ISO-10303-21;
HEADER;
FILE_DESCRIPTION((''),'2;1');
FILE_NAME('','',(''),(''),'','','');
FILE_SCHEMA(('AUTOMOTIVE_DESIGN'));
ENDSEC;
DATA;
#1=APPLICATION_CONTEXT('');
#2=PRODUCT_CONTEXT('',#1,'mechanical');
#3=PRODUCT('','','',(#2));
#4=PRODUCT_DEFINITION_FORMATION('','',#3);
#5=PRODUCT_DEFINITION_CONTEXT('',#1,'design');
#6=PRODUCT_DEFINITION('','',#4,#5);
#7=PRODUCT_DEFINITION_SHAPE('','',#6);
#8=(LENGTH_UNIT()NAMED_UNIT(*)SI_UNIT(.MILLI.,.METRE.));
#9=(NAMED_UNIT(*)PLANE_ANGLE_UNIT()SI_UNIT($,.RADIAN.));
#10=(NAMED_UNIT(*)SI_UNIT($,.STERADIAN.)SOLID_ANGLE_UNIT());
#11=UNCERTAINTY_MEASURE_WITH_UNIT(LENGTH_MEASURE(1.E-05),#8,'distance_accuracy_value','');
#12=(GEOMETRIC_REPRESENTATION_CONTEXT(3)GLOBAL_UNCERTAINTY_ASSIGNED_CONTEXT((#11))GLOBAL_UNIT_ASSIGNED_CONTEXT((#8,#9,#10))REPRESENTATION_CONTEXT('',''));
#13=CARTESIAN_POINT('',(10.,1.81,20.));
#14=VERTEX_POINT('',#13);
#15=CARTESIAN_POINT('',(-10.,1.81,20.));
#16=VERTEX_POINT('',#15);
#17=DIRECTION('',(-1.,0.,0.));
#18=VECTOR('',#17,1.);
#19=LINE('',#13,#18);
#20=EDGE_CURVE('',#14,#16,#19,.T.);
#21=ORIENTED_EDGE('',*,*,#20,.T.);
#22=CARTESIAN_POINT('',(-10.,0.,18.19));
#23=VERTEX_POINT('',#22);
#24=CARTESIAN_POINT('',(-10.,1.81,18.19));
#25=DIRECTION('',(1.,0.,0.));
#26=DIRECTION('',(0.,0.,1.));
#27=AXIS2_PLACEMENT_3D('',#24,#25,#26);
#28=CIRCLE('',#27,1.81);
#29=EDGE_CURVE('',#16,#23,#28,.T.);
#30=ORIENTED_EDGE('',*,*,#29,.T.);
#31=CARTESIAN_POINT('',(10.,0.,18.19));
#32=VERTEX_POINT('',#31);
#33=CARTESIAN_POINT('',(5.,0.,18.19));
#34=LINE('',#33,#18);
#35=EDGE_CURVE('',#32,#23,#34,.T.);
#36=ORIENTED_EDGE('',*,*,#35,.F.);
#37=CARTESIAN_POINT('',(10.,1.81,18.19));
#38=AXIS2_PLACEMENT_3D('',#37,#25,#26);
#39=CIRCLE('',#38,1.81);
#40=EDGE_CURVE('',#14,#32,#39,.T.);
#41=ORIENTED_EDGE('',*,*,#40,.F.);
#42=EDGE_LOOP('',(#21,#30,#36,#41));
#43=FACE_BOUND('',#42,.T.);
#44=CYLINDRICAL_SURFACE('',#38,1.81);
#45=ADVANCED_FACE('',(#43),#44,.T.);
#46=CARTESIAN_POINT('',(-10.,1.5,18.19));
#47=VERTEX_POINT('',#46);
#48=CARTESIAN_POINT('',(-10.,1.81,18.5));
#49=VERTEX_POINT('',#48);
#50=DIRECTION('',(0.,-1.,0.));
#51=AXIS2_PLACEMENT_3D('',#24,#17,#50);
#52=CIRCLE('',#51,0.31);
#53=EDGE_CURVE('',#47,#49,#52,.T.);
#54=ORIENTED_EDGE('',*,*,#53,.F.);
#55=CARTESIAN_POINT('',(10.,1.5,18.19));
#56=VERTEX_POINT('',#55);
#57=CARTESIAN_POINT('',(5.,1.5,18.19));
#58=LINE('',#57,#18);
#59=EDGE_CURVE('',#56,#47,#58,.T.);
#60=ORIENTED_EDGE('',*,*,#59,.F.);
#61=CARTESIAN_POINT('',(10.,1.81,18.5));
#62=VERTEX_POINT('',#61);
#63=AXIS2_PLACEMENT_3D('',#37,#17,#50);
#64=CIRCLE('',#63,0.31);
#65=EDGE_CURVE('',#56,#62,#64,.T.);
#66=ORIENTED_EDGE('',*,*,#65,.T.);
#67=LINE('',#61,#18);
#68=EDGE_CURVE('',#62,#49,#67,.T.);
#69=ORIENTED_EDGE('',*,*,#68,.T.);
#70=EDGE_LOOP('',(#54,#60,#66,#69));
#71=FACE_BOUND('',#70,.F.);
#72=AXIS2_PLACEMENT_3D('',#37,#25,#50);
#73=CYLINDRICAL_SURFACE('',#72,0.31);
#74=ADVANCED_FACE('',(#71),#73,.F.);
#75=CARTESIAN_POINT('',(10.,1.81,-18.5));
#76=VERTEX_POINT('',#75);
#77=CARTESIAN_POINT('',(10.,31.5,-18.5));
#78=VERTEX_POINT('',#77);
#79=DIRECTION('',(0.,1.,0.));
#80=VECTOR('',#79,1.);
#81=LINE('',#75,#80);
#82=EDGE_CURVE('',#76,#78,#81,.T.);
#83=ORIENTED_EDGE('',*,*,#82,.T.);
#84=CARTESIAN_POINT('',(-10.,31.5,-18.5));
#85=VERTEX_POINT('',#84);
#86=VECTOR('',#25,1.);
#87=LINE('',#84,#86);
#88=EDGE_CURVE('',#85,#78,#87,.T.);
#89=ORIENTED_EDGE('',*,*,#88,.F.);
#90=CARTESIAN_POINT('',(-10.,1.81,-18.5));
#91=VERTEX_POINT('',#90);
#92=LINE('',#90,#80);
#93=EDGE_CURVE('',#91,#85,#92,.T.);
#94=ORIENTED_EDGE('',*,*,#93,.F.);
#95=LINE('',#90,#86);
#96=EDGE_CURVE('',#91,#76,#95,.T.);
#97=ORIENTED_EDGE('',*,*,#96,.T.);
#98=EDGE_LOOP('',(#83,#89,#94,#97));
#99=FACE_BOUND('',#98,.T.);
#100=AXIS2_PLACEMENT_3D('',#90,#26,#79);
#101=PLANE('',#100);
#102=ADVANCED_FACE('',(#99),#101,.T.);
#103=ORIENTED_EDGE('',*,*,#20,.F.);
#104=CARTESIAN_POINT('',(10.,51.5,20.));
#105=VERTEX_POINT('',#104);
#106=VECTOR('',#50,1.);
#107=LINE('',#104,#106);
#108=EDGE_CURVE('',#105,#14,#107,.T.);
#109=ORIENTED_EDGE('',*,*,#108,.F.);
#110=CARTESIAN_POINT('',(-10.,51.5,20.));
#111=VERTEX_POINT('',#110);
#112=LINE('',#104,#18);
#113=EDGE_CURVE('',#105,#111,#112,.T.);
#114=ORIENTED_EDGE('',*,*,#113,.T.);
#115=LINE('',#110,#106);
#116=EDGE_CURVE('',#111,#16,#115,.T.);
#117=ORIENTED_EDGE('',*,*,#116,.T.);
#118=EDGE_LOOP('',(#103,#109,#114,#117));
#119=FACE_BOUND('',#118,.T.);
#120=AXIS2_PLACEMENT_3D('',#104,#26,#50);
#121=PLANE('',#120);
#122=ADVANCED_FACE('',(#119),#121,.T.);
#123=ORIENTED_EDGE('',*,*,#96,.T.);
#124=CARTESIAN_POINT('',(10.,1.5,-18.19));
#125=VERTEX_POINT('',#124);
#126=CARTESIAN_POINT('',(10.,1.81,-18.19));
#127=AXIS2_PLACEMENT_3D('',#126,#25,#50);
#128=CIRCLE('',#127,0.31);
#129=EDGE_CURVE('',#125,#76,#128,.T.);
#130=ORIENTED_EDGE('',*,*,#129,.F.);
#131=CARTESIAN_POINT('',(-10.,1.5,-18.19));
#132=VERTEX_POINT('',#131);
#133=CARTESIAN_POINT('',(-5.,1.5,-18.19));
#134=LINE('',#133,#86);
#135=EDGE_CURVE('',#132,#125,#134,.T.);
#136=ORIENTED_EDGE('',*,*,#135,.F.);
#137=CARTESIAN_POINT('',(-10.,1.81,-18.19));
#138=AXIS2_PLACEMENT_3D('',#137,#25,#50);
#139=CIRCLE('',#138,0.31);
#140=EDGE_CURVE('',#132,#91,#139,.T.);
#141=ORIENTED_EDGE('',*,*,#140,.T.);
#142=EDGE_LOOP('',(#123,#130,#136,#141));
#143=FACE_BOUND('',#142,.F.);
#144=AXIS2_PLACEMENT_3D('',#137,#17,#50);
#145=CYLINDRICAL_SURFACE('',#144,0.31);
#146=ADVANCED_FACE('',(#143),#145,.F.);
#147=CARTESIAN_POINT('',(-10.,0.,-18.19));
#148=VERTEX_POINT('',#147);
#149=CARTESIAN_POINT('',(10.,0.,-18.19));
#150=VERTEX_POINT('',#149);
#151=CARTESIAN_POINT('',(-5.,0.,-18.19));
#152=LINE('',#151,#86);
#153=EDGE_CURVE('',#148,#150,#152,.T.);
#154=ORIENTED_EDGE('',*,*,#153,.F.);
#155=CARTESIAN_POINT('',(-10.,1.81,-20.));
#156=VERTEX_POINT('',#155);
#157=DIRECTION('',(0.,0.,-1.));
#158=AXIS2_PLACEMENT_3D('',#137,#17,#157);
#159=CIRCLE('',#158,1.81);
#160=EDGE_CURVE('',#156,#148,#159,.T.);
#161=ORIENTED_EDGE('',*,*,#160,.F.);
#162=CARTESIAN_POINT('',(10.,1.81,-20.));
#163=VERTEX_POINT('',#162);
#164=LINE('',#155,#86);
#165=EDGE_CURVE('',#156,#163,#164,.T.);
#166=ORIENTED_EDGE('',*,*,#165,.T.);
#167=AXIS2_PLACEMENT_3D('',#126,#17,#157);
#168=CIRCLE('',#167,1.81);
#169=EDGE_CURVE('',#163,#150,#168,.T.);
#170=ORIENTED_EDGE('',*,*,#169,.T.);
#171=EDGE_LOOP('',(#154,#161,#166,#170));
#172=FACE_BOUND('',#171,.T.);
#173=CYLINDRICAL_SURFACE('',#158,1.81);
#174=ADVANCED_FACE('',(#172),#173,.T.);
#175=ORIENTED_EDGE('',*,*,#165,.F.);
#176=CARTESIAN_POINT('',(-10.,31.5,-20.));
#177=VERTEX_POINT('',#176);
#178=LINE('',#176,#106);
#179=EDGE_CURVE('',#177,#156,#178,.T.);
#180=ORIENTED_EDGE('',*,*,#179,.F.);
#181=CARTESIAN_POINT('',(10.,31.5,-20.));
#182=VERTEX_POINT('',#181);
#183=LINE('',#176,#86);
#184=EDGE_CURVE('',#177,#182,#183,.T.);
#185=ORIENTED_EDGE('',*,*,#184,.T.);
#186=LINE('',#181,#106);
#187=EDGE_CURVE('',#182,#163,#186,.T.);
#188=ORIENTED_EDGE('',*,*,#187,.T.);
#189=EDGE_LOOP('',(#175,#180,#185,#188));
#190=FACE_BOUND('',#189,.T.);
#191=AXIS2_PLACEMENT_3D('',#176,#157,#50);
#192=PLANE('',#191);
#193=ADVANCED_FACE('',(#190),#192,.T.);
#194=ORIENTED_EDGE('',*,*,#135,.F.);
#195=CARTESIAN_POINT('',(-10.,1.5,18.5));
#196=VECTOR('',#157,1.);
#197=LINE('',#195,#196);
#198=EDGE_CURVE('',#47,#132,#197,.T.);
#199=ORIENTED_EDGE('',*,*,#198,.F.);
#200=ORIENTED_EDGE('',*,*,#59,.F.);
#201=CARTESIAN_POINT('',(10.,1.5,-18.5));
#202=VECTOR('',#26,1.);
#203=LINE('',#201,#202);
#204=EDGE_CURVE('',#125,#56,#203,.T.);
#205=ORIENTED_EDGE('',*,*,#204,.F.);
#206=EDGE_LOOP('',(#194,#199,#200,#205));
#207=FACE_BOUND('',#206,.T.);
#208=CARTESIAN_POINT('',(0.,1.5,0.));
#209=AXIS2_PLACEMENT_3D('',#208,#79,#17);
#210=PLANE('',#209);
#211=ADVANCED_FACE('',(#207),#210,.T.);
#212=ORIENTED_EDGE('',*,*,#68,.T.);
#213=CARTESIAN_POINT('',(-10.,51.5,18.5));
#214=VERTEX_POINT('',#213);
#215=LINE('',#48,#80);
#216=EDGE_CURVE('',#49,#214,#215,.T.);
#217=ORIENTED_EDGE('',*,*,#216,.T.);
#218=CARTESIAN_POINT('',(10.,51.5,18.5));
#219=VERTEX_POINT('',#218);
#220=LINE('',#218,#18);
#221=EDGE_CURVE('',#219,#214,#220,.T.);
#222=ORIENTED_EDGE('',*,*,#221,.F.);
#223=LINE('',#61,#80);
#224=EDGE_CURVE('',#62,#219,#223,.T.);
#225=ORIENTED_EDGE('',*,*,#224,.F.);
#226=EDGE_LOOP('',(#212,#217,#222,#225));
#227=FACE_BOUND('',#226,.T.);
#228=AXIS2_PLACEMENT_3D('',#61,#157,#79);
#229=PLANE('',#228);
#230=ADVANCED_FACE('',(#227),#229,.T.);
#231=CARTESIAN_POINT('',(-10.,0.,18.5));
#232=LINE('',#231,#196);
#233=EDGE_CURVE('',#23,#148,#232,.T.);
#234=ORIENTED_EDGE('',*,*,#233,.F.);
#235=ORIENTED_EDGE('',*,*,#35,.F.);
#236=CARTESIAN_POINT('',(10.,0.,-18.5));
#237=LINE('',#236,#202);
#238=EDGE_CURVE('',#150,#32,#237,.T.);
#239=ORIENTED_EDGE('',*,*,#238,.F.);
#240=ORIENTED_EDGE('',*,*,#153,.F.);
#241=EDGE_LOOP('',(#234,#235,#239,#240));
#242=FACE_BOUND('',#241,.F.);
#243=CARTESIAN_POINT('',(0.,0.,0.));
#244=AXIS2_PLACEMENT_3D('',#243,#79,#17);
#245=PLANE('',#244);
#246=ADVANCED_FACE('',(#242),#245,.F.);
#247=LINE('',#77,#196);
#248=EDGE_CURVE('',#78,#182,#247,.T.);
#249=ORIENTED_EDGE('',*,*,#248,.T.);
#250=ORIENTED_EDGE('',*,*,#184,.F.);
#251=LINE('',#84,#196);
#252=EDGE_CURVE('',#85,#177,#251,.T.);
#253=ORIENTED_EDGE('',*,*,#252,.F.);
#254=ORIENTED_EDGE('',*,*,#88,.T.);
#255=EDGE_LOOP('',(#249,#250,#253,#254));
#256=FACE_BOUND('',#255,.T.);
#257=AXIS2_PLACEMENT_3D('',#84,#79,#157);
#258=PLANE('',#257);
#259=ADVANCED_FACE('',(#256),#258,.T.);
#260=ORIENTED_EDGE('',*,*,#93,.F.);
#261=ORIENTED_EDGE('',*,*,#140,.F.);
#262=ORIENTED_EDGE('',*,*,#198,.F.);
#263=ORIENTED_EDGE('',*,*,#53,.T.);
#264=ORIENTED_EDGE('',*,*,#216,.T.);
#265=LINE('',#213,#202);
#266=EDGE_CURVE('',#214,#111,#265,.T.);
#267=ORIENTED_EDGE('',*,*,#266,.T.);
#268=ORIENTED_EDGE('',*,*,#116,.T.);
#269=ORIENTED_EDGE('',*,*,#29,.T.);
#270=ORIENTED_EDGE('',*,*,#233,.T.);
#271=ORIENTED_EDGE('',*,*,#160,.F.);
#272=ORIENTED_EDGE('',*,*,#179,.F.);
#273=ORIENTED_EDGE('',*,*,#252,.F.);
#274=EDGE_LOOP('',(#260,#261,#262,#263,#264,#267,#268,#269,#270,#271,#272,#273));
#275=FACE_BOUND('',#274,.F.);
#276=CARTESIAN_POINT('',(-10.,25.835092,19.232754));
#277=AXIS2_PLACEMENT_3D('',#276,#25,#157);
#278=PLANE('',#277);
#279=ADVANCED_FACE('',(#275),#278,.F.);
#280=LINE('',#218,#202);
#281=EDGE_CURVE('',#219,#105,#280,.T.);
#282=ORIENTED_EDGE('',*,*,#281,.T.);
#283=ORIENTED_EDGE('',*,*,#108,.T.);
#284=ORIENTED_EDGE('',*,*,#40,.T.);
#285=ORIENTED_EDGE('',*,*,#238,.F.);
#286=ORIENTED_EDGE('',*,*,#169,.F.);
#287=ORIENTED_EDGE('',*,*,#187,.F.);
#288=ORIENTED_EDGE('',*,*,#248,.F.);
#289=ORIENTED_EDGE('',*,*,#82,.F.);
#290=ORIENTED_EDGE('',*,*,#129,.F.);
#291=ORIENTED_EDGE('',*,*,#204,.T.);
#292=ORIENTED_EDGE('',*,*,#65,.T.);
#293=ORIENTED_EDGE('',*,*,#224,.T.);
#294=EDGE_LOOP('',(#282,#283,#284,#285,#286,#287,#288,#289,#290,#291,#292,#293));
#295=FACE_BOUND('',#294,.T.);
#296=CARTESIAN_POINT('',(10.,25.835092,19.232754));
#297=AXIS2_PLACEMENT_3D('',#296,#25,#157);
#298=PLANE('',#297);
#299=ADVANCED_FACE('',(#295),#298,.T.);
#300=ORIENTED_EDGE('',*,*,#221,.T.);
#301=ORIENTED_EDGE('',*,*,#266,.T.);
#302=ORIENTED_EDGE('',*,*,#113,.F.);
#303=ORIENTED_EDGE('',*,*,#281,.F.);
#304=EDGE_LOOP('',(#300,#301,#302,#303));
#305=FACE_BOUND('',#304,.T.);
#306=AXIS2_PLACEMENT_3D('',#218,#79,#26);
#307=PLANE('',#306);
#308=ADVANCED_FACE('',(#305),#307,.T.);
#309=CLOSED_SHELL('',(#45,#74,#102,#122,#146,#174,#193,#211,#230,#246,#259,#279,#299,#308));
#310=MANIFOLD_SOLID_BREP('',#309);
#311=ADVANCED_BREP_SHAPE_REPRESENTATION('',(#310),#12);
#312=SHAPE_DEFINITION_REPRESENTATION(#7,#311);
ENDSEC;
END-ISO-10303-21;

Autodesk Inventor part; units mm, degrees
ref_plane "YZ Plane" through (0, 0, 0) normal (1, 0, 0) x (0, 1, 0)
ref_plane "XZ Plane" through (0, 0, 0) normal (0, 1, 0) x (-1, 0, 0)
ref_plane "XY Plane" through (0, 0, 0) normal (0, 0, 1) x (1, 0, 0)
sketch "Sketch1" plane through (0, 0, 0) normal (0, 1, 0) x (-1, 0, 0)
  line L0 (10, -18.5) -> (-10, -18.5)
  line L1 (-10, -18.5) -> (-10, 18.5)
  line L2 (-10, 18.5) -> (10, 18.5)
  line L3 (10, 18.5) -> (10, -18.5)
  point P0 (0, 0)
  dimension "d0" = 20
  dimension "d1" = 37
  dimension "d2" = 18.5
  dimension "d3" = 10
extrude "Plate1" add sketch "Sketch1" along normal blind 1.5
sketch "Sketch2" plane through (-10, 0, -20) normal (0, 0, 1) x (1, 0, 0)
  line L0 (20, 0) -> (0, 0)
  line L1 (0, 0) -> (0, 31.5)
  line L2 (0, 31.5) -> (20, 31.5)
  line L3 (20, 31.5) -> (20, 0)
edge flange "Flange1" height 31.5 angle 90 thickness 1.5 bend radius 0.31 thickness toward (0, 0, 1) relief tear relief width 1.5 relief depth 0.75 edges at (0, 1.5, -18.5) wall of the first edge with corners at (10, 0, -20) (-10, 0, -20) (-10, 31.5, -20) (10, 31.5, -20)
bend "Bend1"
corner "Corner1"
sketch "Sketch3" plane through (10, 0, 20) normal (0, 0, -1) x (-1, 0, 0)
  line L0 (20, 0) -> (0, 0)
  line L1 (0, 0) -> (0, 51.5)
  line L2 (0, 51.5) -> (20, 51.5)
  line L3 (20, 51.5) -> (20, 0)
edge flange "Flange2" height 51.5 angle 90 thickness 1.5 bend radius 0.31 thickness toward (0, 0, -1) relief tear relief width 1.5 relief depth 0.75 edges at (0, 1.5, 18.5) wall of the first edge with corners at (-10, 0, 20) (10, 0, 20) (10, 51.5, 20) (-10, 51.5, 20)
bend "Bend2"
corner "Corner2"
equation "\"d4\" = Thickness"
equation "\"d5\" = BendReliefWidth"
equation "\"d6\" = BendReliefDepth"
equation "\"d7\" = MinimumRemnant"
equation "\"d8\" = TransitionRadius"
equation "\"d11\" = BendRadius"
equation "\"d12\" = CornerReliefSize"
equation "\"d13\" = GapSize"
equation "\"d14\" = JacobiRadiusSize"
equation "\"d15\" = BendReliefWidth"
equation "\"d16\" = BendReliefDepth"
equation "\"d17\" = MinimumRemnant"
equation "\"d18\" = TransitionRadius"
equation "\"d21\" = BendRadius"
equation "\"d22\" = CornerReliefSize"
equation "\"d23\" = GapSize"
equation "\"d24\" = JacobiRadiusSize"
equation "\"BendReliefWidth\" = Thickness"
equation "\"BendReliefDepth\" = 0.5 * Thickness"
equation "\"CornerReliefSize\" = 4 * Thickness"
equation "\"MinimumRemnant\" = 2 * Thickness"
equation "\"TransitionRadius\" = BendRadius"
equation "\"JacobiRadiusSize\" = BendRadius"
equation "\"GapSize\" = Thickness"
equation "\"Thickness\" = 1.5"
equation "\"BendRadius\" = 0.31"
properties part number "axis_9_bottom_frame" material "Aluminum 6061-AHC"
